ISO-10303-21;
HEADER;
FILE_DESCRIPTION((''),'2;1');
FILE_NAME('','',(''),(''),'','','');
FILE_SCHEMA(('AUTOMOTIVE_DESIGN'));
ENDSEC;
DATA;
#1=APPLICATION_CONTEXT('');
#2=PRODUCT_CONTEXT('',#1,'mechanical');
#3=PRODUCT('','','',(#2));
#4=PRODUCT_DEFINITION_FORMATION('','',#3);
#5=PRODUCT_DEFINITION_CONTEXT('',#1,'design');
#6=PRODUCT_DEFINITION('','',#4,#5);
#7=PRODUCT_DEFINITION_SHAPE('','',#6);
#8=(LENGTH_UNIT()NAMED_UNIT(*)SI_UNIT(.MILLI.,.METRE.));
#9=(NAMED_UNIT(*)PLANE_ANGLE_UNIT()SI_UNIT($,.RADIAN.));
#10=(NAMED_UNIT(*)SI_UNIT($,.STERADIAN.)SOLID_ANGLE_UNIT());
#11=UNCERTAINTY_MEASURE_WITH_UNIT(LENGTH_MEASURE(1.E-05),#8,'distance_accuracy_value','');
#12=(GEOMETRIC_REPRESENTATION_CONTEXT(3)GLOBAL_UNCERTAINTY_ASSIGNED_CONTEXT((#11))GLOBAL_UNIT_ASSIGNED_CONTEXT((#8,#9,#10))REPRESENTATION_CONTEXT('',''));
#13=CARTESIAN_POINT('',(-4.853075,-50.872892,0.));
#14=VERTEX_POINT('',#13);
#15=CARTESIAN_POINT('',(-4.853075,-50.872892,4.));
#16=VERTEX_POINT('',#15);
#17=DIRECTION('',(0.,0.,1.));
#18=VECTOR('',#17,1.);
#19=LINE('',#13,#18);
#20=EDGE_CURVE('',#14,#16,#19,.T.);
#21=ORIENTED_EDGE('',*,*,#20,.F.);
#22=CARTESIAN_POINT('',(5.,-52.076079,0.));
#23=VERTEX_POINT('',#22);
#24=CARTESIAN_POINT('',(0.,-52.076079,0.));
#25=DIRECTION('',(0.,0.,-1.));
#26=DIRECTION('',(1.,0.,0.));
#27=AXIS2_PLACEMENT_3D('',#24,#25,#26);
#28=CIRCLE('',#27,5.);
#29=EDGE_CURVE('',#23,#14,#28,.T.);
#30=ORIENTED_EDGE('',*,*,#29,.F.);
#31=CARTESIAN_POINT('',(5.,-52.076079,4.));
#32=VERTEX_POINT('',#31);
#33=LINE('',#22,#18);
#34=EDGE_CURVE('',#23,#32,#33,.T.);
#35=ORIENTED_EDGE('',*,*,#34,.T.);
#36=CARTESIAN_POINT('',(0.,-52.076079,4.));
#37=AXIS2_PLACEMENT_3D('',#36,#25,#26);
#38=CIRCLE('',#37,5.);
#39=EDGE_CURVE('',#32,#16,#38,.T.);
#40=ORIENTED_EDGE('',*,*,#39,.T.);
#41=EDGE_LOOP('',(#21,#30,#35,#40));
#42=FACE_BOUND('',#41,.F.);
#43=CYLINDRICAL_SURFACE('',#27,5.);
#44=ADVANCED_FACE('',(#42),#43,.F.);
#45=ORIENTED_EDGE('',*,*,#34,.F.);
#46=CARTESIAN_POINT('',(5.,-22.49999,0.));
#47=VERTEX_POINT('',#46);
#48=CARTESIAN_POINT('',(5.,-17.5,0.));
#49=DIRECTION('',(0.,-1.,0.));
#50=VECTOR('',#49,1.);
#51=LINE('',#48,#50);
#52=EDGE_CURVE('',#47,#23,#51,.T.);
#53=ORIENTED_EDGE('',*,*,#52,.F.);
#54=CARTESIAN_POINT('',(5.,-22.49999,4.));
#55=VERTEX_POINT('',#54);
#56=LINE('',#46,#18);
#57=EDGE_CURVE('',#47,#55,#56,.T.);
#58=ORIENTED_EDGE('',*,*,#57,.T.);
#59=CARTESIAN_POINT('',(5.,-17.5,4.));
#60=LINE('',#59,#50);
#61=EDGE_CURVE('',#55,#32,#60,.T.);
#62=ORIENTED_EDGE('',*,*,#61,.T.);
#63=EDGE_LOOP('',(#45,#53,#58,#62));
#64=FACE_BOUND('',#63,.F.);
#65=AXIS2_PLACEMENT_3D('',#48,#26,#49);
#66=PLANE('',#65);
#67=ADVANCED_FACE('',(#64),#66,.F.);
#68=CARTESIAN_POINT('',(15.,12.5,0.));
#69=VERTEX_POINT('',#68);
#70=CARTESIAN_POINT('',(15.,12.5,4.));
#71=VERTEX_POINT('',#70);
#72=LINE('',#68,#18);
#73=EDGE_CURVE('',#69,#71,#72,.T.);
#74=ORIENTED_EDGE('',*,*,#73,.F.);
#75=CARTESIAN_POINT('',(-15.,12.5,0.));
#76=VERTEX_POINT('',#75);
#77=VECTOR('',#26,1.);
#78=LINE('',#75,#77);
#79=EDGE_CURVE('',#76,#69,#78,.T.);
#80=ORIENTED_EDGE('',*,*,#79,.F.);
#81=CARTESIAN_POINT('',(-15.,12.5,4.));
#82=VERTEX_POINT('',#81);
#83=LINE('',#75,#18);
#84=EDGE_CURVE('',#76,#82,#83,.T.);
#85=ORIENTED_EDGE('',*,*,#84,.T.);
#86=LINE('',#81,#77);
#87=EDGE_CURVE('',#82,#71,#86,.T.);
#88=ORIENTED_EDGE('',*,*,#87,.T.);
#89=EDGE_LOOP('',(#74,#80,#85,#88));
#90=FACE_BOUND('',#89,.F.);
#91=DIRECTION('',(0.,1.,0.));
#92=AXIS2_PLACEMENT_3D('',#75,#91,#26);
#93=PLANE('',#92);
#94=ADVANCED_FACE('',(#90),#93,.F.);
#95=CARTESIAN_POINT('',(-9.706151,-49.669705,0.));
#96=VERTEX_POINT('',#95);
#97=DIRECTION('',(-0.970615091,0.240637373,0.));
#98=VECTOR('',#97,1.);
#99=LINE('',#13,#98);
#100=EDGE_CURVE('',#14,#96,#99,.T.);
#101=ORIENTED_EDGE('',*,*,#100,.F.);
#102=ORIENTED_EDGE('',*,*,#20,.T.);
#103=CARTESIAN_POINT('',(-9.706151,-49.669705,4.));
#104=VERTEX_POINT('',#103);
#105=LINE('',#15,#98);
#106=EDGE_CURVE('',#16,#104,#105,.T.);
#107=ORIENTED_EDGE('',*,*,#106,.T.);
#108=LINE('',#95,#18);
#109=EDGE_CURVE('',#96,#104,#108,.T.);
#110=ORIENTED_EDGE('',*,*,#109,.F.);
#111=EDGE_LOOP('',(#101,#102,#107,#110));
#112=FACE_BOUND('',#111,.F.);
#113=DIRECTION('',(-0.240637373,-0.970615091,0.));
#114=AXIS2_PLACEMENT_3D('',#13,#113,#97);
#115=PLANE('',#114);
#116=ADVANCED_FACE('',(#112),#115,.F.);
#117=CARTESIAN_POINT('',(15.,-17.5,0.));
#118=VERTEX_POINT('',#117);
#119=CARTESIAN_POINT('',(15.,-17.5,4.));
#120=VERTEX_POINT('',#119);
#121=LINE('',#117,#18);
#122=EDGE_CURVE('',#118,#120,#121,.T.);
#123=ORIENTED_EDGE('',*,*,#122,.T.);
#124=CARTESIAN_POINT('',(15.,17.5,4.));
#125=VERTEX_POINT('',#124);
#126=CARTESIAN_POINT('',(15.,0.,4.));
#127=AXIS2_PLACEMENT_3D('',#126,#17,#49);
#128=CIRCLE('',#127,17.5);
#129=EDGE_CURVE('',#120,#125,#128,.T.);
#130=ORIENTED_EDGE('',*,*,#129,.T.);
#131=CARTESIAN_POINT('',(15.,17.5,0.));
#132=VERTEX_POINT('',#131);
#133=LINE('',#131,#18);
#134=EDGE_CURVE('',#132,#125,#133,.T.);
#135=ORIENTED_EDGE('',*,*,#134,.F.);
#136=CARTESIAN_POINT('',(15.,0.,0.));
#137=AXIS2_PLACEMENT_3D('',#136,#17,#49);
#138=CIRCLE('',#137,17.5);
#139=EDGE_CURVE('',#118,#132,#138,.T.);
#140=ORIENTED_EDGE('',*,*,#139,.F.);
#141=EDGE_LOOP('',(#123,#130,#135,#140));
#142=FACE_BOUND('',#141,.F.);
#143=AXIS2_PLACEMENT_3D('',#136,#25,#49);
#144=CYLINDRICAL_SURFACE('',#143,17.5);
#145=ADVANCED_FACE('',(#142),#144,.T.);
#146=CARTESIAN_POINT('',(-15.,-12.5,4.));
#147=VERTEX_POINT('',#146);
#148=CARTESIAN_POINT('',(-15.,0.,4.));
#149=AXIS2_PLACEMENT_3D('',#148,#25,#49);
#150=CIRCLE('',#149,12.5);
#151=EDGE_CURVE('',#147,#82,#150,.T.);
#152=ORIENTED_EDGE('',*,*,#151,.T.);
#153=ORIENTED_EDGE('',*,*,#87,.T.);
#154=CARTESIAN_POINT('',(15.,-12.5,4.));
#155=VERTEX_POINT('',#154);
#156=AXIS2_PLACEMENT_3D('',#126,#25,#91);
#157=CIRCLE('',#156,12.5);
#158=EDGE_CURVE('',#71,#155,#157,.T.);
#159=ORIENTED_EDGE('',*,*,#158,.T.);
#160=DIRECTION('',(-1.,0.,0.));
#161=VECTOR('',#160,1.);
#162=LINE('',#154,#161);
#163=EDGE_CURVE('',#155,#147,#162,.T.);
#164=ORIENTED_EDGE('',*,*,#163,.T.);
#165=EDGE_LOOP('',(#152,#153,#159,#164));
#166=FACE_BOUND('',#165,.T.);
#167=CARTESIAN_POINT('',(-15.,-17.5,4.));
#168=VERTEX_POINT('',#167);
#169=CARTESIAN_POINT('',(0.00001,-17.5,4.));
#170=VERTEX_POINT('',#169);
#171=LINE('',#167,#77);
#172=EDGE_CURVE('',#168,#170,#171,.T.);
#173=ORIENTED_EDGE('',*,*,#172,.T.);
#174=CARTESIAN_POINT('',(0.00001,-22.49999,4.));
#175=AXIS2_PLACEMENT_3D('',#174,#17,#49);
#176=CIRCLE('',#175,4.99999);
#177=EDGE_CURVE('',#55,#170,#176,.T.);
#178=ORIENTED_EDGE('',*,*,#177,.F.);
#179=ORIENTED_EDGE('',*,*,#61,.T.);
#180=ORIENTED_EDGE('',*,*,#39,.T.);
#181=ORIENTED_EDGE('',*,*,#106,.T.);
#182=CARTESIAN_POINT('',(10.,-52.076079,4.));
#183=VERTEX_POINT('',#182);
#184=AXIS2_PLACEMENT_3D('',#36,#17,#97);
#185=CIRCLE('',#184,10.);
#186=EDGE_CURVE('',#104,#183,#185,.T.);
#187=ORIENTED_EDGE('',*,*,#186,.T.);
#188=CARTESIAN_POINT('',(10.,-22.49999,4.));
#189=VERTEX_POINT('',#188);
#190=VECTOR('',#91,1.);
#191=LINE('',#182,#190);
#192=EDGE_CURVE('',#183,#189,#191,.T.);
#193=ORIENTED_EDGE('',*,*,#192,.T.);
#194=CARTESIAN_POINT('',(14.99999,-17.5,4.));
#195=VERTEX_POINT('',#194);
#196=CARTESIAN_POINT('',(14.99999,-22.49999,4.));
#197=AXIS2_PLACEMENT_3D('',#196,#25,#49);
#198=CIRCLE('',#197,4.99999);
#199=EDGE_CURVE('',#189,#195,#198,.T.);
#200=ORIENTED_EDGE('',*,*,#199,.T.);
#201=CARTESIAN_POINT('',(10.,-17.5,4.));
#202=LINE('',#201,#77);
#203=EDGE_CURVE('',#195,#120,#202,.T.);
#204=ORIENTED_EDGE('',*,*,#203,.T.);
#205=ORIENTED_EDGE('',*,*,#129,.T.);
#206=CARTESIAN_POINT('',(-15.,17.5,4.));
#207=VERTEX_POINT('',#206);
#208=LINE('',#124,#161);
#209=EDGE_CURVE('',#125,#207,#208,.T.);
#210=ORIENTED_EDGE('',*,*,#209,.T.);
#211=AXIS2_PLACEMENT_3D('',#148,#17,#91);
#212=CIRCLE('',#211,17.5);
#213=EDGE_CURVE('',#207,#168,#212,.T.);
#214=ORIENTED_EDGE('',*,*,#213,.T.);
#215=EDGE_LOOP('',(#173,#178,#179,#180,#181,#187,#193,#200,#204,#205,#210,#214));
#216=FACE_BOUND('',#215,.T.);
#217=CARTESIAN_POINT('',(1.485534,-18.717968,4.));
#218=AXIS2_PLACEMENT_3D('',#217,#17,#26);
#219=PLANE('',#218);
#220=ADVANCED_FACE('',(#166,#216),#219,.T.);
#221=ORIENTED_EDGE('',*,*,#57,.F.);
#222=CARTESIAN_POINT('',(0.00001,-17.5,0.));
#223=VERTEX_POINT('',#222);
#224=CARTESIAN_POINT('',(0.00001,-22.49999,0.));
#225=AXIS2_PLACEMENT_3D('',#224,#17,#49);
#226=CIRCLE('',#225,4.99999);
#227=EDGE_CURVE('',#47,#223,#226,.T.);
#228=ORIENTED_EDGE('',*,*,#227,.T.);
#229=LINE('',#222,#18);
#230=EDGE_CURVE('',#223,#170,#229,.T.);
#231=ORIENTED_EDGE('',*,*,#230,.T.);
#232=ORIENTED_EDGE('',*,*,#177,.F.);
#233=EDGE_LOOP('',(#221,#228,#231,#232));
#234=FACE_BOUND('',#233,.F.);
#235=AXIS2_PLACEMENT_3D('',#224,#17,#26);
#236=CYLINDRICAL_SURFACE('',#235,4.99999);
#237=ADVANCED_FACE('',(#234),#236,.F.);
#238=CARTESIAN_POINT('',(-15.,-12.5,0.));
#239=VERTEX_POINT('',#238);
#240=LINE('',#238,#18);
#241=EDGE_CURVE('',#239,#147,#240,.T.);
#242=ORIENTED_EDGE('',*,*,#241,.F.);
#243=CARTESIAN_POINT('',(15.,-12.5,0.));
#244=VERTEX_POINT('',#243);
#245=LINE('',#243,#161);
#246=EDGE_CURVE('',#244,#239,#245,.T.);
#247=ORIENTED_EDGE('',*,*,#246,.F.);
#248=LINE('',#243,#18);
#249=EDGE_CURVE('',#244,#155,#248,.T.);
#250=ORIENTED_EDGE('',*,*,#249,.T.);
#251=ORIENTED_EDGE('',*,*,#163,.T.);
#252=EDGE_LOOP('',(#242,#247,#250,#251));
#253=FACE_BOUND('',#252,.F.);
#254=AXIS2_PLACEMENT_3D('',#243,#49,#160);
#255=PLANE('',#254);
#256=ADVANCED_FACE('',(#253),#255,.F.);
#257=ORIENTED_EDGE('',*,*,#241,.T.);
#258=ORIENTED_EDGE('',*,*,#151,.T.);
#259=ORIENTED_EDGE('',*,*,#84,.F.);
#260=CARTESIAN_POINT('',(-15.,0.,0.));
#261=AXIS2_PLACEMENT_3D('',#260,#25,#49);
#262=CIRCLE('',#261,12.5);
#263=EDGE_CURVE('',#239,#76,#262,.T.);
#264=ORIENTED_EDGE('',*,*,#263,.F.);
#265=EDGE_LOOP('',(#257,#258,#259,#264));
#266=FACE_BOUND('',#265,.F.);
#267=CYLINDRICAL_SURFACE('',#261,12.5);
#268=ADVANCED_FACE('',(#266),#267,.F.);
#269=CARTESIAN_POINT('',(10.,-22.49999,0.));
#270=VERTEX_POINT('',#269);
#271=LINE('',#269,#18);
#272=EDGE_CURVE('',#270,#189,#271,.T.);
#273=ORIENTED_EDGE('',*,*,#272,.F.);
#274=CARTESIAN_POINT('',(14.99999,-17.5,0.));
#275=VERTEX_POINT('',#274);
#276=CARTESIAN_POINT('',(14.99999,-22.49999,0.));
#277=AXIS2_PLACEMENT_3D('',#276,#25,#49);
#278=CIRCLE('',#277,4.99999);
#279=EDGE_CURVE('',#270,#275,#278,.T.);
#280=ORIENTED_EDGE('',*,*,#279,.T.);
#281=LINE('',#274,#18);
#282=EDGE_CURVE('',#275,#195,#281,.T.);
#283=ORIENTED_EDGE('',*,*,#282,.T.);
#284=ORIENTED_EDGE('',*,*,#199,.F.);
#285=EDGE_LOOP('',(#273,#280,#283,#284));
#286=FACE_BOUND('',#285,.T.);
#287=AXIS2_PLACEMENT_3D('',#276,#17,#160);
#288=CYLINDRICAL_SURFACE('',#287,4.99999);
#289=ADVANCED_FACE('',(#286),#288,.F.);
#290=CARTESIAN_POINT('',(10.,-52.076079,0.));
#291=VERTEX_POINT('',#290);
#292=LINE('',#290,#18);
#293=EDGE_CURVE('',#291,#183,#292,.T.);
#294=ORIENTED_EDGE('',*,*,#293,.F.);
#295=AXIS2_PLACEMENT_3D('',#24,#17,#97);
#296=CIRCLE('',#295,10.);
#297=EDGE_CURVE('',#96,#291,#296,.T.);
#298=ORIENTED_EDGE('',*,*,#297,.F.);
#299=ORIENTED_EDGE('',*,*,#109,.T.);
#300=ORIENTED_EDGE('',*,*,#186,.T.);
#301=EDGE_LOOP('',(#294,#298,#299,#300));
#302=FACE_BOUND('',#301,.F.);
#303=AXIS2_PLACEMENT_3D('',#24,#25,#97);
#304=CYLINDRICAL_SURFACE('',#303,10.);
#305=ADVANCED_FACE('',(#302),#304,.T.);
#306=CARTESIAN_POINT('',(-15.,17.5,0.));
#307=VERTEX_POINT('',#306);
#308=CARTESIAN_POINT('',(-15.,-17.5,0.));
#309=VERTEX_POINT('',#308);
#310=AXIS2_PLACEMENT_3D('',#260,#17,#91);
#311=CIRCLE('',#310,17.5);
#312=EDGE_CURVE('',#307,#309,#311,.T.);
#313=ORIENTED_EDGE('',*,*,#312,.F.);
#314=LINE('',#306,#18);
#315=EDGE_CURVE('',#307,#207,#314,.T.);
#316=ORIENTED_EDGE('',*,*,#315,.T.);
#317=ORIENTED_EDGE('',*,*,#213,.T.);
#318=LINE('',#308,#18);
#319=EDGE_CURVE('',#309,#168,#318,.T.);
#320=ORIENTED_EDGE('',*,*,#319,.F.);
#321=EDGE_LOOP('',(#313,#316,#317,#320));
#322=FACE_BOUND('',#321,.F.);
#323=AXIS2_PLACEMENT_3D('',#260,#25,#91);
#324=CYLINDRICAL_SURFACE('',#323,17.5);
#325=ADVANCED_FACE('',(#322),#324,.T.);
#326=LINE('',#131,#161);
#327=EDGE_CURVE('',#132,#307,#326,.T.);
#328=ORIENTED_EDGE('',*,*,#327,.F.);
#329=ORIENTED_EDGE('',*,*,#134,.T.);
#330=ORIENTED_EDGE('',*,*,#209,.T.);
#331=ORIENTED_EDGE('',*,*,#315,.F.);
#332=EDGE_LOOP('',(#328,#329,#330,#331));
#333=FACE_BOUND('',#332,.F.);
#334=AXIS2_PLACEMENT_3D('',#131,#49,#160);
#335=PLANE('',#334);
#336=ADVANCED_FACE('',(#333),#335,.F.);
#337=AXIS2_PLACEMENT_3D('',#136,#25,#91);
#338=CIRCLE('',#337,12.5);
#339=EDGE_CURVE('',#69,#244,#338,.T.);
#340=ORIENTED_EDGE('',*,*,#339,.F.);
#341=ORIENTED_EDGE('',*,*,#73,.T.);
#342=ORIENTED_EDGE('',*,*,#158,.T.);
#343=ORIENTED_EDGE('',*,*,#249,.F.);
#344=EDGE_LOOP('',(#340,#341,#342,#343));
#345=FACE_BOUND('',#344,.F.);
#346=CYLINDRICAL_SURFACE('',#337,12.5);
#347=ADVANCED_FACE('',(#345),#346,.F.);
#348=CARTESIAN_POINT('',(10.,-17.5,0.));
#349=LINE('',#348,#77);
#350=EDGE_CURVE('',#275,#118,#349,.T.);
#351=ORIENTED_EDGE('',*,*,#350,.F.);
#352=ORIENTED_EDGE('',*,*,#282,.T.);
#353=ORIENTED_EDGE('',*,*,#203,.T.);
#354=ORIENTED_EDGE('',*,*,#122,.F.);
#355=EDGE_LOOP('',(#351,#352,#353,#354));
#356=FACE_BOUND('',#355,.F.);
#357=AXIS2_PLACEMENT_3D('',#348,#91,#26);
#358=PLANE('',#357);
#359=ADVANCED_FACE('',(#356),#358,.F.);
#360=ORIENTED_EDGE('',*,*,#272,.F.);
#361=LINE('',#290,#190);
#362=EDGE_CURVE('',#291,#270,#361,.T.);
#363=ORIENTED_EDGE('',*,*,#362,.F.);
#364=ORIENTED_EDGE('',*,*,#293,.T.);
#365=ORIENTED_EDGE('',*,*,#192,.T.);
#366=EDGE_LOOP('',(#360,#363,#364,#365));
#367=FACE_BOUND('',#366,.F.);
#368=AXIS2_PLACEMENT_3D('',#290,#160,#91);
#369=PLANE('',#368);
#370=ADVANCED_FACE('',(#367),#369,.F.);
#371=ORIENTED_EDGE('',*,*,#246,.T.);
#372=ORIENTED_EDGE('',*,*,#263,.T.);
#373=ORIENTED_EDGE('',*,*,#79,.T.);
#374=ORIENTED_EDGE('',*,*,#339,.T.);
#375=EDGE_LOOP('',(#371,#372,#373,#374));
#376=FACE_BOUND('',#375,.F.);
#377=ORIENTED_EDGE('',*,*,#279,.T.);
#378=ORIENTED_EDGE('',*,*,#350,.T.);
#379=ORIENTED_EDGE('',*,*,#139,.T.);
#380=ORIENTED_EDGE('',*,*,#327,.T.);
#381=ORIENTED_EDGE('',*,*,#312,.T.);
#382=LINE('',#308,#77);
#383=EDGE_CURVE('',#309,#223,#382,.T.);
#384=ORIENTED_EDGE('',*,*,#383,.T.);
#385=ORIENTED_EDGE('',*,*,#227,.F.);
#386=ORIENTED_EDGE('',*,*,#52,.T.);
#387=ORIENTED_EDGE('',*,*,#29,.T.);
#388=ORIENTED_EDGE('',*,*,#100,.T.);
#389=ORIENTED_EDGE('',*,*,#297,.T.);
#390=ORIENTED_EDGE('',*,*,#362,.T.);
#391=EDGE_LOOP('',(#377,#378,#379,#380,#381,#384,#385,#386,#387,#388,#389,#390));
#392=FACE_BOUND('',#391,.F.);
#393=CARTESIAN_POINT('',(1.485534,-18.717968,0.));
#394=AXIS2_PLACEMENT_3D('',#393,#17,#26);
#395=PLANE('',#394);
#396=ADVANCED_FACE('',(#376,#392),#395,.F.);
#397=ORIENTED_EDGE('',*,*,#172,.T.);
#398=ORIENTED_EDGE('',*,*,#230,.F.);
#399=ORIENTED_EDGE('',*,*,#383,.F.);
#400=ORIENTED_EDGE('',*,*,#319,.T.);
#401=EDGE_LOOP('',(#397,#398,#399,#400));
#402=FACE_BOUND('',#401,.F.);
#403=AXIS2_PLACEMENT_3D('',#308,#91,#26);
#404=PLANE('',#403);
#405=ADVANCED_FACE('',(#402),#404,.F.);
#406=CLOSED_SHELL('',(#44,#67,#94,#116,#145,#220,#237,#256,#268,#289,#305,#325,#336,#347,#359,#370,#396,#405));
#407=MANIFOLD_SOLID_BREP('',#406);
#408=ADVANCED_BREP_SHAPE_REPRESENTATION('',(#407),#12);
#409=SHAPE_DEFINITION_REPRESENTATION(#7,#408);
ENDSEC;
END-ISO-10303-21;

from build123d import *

# Parameters (mm, degrees)
F1_DEPTH = 4
F2_R     = 4.99999


# Not quite as in the source:
# - a fillet or chamfer is up to 0.001 mm smaller than in the source, because OpenCascade refuses the exact size


with BuildPart() as f1:
    # F0 (on Top) → F1 (new body)
    with BuildSketch(Plane.XY):
        with BuildLine():
            ThreePointArc((5, -52.0760789514), (-0.6060621786, -57.039211897), (-4.8530754543, -50.8728920851))
            Line((-4.8530754543, -50.8728920851), (-9.7061509086, -49.6697052189))
            ThreePointArc((-9.7061509086, -49.6697052189), (-1.2121243571, -62.0023448426), (10, -52.0760789514))
            Line((10, -52.0760789514), (10, -20.8603814244))
            Line((10, -20.8603814244), (10, -17.5000000745))
            Line((10, -17.5000000745), (15, -17.5000000745))
            ThreePointArc((15, -17.5000000745), (32.5000000745, 0), (15, 17.5000000745))
            Line((15, 17.5000000745), (0, 17.5000000745))
            Line((0, 17.5000000745), (-15, 17.5000000745))
            ThreePointArc((-15, 17.5000000745), (-32.5000000745, 0), (-15, -17.5000000745))
            Line((-15, -17.5000000745), (0, -17.5000000745))
            Line((0, -17.5000000745), (5, -17.5000000745))
            Line((5, -17.5000000745), (5, -18.7957836315))
            Line((5, -18.7957836315), (5, -43.4158249135))
            Line((5, -43.4158249135), (5, -52.0760789514))
        make_face()
        with BuildLine():
            ThreePointArc((-15, -12.5), (-27.5, 0), (-15, 12.5))
            Line((-15, 12.5), (0, 12.5))
            Line((0, 12.5), (15, 12.5))
            ThreePointArc((15, 12.5), (27.5, 0), (15, -12.5))
            Line((15, -12.5), (0, -12.5))
            Line((0, -12.5), (-15, -12.5))
        make_face(mode=Mode.SUBTRACT)
    extrude(amount=F1_DEPTH)

    # F2 (radius 5 in the source; OpenCascade refuses exactly that, so slightly less here)
    f2_edges = [f1.edges().sort_by_distance(p)[0] for p in [
        (5, -17.5, 2),
        (10, -17.5, 2),
    ]]
    fillet(f2_edges, radius=F2_R)


solid = f1.part
